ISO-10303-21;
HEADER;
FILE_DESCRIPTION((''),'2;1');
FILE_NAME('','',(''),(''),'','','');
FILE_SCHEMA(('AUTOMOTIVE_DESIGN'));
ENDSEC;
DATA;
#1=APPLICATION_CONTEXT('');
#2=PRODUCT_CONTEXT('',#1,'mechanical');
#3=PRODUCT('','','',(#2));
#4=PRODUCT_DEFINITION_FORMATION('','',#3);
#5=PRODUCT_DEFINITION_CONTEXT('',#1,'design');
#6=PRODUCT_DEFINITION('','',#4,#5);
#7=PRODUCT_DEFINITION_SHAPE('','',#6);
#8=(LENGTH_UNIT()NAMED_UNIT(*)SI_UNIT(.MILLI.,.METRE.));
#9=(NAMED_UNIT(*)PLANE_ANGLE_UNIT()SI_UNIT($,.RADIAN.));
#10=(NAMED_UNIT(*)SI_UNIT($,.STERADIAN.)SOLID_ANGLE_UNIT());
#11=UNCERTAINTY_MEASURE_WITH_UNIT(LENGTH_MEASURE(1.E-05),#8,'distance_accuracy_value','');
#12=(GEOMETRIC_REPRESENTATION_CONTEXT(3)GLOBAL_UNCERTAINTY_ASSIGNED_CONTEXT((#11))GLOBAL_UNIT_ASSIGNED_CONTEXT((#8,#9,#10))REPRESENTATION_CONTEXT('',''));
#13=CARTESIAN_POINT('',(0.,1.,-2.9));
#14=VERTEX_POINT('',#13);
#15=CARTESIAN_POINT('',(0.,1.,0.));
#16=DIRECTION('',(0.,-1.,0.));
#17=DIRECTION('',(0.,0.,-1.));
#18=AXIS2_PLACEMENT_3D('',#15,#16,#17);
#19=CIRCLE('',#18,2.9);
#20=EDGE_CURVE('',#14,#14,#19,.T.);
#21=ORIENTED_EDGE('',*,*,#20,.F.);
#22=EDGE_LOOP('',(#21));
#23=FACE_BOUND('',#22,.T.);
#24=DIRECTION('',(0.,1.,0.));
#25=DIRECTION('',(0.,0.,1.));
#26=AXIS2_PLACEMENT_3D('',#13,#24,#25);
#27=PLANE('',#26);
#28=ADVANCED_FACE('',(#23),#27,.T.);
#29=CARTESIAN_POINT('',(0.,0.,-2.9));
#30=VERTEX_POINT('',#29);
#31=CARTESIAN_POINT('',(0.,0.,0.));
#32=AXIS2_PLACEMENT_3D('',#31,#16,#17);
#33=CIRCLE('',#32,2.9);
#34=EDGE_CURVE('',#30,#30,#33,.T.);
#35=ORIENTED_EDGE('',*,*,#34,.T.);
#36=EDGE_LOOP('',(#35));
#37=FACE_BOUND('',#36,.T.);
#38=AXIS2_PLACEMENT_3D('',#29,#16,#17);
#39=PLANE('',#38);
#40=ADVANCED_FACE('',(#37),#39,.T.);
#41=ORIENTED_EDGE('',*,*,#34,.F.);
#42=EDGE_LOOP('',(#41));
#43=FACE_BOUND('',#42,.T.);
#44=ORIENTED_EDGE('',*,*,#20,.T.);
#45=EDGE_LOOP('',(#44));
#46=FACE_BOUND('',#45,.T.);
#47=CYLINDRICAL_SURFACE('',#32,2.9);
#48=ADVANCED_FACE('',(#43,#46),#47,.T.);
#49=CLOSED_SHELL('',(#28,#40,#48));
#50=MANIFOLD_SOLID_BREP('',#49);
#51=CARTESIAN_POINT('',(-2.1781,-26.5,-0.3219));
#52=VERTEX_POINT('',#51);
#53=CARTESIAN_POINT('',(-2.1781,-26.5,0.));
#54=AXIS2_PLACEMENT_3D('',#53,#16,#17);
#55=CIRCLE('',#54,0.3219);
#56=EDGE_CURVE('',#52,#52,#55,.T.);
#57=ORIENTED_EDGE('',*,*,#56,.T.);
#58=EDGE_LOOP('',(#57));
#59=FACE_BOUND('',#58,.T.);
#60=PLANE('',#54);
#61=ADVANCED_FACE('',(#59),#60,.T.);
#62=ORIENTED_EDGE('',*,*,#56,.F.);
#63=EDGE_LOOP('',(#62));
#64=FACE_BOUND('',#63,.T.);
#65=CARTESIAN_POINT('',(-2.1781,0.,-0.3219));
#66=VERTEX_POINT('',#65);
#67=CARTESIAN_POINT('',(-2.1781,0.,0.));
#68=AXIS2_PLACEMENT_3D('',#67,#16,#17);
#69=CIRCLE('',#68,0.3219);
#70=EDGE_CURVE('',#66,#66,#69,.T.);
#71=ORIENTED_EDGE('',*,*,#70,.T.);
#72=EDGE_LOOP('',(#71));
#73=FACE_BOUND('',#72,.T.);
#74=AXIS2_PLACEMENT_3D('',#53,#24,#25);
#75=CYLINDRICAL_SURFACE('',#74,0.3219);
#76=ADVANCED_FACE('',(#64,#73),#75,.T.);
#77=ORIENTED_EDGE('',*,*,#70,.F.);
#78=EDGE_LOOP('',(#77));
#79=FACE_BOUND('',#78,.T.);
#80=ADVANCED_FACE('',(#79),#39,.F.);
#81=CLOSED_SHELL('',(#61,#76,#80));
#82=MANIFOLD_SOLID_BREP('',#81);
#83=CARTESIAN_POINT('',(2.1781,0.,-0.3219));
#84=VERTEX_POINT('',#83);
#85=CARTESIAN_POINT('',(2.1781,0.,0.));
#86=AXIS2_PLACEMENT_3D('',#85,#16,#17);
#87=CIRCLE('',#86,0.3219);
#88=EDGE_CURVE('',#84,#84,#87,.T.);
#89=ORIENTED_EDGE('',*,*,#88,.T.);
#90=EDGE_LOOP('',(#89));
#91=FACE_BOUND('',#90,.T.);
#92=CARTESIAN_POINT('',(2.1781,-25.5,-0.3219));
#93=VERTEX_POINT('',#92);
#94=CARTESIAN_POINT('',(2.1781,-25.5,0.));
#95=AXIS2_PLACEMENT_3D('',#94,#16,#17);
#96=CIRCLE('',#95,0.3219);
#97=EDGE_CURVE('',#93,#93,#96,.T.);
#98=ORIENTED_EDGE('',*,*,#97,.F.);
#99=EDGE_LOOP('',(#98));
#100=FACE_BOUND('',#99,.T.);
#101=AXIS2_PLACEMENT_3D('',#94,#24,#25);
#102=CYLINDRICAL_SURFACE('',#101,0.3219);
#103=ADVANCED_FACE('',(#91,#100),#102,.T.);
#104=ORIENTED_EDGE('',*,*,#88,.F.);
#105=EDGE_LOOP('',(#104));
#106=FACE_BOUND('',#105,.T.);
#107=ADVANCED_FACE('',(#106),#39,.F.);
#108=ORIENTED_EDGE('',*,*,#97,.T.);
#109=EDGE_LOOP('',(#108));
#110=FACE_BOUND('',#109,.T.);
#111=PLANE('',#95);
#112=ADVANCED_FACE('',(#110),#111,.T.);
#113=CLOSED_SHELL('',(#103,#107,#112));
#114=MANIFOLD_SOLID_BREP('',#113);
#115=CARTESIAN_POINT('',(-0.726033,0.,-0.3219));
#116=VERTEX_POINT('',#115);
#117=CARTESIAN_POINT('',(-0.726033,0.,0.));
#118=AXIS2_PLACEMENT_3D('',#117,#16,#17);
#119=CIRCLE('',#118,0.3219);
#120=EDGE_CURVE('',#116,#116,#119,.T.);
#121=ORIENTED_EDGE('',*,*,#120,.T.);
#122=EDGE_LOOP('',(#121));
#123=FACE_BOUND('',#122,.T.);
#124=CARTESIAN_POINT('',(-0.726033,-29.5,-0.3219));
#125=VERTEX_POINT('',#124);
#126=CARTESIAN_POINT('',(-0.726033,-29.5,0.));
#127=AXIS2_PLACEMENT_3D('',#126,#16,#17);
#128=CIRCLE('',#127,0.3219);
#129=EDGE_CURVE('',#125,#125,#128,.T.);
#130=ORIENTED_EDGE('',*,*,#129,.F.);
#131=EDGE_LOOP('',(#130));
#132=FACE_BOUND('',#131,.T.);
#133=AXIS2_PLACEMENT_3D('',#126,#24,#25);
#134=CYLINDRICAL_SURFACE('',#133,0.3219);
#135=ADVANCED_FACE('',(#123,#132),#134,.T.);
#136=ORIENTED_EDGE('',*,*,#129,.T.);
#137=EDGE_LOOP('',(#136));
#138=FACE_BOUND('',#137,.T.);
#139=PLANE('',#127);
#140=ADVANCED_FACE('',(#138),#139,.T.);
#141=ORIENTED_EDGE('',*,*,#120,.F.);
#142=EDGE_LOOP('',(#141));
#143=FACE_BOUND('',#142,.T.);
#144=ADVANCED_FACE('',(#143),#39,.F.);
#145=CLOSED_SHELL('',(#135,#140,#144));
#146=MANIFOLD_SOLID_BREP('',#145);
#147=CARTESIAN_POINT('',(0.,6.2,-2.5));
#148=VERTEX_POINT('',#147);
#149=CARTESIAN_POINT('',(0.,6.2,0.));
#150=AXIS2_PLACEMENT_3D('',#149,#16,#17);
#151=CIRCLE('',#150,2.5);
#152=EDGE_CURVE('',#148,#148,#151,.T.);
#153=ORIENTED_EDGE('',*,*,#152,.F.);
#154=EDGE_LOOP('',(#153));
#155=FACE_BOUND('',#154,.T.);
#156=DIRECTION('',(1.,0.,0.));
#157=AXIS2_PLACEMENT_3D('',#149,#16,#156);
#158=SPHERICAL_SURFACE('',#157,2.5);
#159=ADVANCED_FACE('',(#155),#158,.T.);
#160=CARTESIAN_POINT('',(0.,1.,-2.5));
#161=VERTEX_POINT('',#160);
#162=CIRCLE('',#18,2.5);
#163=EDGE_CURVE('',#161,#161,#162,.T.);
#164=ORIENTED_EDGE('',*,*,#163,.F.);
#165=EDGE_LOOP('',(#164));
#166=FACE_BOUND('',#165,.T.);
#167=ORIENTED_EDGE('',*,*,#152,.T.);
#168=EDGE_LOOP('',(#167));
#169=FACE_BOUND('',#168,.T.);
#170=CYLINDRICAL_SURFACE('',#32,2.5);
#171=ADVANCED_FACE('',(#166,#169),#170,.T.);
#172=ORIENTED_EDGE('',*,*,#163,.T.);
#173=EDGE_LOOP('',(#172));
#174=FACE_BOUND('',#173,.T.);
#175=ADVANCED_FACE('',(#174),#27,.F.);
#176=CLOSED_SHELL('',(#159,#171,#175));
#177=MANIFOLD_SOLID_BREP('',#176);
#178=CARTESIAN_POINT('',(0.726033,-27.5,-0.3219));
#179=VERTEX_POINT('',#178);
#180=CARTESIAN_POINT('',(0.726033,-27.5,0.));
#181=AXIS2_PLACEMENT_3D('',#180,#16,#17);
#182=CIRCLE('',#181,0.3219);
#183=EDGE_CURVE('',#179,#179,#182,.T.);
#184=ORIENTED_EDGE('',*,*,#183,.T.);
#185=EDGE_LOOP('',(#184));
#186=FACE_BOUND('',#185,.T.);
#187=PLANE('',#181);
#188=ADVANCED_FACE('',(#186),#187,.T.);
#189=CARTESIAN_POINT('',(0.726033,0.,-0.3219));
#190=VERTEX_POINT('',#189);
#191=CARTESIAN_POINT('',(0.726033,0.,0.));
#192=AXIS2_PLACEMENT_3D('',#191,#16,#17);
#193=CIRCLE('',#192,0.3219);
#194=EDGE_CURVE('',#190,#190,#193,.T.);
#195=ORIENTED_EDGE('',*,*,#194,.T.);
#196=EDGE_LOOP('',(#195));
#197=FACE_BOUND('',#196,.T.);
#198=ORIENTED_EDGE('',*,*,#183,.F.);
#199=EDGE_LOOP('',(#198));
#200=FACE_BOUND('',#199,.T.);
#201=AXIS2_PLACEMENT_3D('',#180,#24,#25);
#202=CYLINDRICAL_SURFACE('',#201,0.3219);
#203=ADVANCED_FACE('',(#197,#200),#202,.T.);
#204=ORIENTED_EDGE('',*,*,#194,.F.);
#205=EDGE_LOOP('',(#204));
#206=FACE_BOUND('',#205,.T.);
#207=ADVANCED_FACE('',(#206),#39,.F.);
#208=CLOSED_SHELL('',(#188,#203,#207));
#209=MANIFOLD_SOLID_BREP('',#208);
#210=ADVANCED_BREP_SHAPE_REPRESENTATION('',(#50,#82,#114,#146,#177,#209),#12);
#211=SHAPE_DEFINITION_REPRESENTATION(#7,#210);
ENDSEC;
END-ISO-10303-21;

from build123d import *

# Parameters (mm, degrees)
SKETCH2_R           = 0.3219
BOSS_EXTRUDE1_DEPTH = 26.5
SKETCH2_3_R         = 0.3219
BOSS_EXTRUDE2_DEPTH = 29.5
SKETCH2_4_R         = 0.3219
BOSS_EXTRUDE3_DEPTH = 27.5
SKETCH2_5_R         = 0.3219
BOSS_EXTRUDE4_DEPTH = 25.5
SPLIT1_START        = -26.5
SPLIT1_OUTLINE_R    = 0.3219
SPLIT1_DEPTH        = 26.5
SPLIT1_START_2      = -29.5
SPLIT1_2_OUTLINE_R  = 0.3219
SPLIT1_2_DEPTH      = 29.5
SPLIT1_START_3      = -27.5
SPLIT1_3_OUTLINE_R  = 0.3219
SPLIT1_3_DEPTH      = 27.5
SPLIT1_START_4      = -25.5
SPLIT1_4_OUTLINE_R  = 0.3219
SPLIT1_4_DEPTH      = 25.5
SPLIT1_5_OUTLINE_R  = 2.9
SPLIT1_5_DEPTH      = 1
SPLIT1_6_OUTLINE_R  = 2.9
SPLIT1_6_DEPTH      = 30.5


# Read off the part's stored shape, not the designer's step: Split1
with BuildPart() as part:
    # Sketch1 → Revolve1 (revolve)
    with BuildSketch(Plane.XY, mode=Mode.PRIVATE) as revolve1_sk:
        with BuildLine():
            Line((0, 0), (2.9, 0))
            Line((2.9, 0), (2.9, 1))
            Line((2.9, 1), (2.5, 1))
            Line((2.5, 1), (2.5, 6.2))
            ThreePointArc((2.5, 6.2), (1.767766953, 7.967766953), (0, 8.7))
            Line((0, 8.7), (0, 0))
        make_face()
    revolve(revolve1_sk.sketch.rotate(Axis((0, 0, 0), (0, 1, 0)), 90), axis=Axis((0, 0, 0), (0, 1, 0)))

    # Sketch2 → Boss-Extrude1 (add)
    with BuildSketch(Plane.XZ):
        with Locations(Location((-2.1781, 0, 0), (0, 0, 270))):
            Circle(SKETCH2_R)
    extrude(amount=BOSS_EXTRUDE1_DEPTH)

    # Sketch2<3> → Boss-Extrude2 (add)
    with BuildSketch(Plane.XZ):
        with Locations(Location((-0.726033333, 0, 0), (0, 0, 270))):
            Circle(SKETCH2_3_R)
    extrude(amount=BOSS_EXTRUDE2_DEPTH)

    # Sketch2<4> → Boss-Extrude3 (add)
    with BuildSketch(Plane.XZ):
        with Locations(Location((0.726033333, 0, 0), (0, 0, 270))):
            Circle(SKETCH2_4_R)
    extrude(amount=BOSS_EXTRUDE3_DEPTH)

    # Sketch2<5> → Boss-Extrude4 (add)
    with BuildSketch(Plane.XZ):
        with Locations(Location((2.1781, 0, 0), (0, 0, 270))):
            Circle(SKETCH2_5_R)
    extrude(amount=BOSS_EXTRUDE4_DEPTH)

    # Split1 6 outline → Split1 6 (cut)
    with BuildSketch(Plane(origin=(0, 0, 0), x_dir=(1, 0, 0), z_dir=(0, 1, 0)).offset(SPLIT1_START_2)):
        Circle(SPLIT1_6_OUTLINE_R)
    extrude(amount=SPLIT1_6_DEPTH, mode=Mode.SUBTRACT)


with BuildPart() as body_2:
    # Split1 outline → Split1 (new body)
    with BuildSketch(Plane(origin=(0, 0, 0), x_dir=(1, 0, 0), z_dir=(0, 1, 0)).offset(SPLIT1_START)):
        with Locations((-2.1781, 0)):
            Circle(SPLIT1_OUTLINE_R)
    extrude(amount=SPLIT1_DEPTH)


with BuildPart() as body_3:
    # Split1 2 outline → Split1 2 (new body)
    with BuildSketch(Plane(origin=(0, 0, 0), x_dir=(1, 0, 0), z_dir=(0, 1, 0)).offset(SPLIT1_START_2)):
        with Locations((-0.726033333, 0)):
            Circle(SPLIT1_2_OUTLINE_R)
    extrude(amount=SPLIT1_2_DEPTH)


with BuildPart() as body_4:
    # Split1 3 outline → Split1 3 (new body)
    with BuildSketch(Plane(origin=(0, 0, 0), x_dir=(1, 0, 0), z_dir=(0, 1, 0)).offset(SPLIT1_START_3)):
        with Locations((0.726033333, 0)):
            Circle(SPLIT1_3_OUTLINE_R)
    extrude(amount=SPLIT1_3_DEPTH)


with BuildPart() as body_5:
    # Split1 4 outline → Split1 4 (new body)
    with BuildSketch(Plane(origin=(0, 0, 0), x_dir=(1, 0, 0), z_dir=(0, 1, 0)).offset(SPLIT1_START_4)):
        with Locations((2.1781, 0)):
            Circle(SPLIT1_4_OUTLINE_R)
    extrude(amount=SPLIT1_4_DEPTH)


with BuildPart() as body_6:
    # Split1 5 outline → Split1 5 (new body)
    with BuildSketch(Plane(origin=(0, 0, 0), x_dir=(1, 0, 0), z_dir=(0, 1, 0))):
        Circle(SPLIT1_5_OUTLINE_R)
    extrude(amount=SPLIT1_5_DEPTH)


solid = Compound([part.part, body_2.part, body_3.part, body_4.part, body_5.part, body_6.part])
